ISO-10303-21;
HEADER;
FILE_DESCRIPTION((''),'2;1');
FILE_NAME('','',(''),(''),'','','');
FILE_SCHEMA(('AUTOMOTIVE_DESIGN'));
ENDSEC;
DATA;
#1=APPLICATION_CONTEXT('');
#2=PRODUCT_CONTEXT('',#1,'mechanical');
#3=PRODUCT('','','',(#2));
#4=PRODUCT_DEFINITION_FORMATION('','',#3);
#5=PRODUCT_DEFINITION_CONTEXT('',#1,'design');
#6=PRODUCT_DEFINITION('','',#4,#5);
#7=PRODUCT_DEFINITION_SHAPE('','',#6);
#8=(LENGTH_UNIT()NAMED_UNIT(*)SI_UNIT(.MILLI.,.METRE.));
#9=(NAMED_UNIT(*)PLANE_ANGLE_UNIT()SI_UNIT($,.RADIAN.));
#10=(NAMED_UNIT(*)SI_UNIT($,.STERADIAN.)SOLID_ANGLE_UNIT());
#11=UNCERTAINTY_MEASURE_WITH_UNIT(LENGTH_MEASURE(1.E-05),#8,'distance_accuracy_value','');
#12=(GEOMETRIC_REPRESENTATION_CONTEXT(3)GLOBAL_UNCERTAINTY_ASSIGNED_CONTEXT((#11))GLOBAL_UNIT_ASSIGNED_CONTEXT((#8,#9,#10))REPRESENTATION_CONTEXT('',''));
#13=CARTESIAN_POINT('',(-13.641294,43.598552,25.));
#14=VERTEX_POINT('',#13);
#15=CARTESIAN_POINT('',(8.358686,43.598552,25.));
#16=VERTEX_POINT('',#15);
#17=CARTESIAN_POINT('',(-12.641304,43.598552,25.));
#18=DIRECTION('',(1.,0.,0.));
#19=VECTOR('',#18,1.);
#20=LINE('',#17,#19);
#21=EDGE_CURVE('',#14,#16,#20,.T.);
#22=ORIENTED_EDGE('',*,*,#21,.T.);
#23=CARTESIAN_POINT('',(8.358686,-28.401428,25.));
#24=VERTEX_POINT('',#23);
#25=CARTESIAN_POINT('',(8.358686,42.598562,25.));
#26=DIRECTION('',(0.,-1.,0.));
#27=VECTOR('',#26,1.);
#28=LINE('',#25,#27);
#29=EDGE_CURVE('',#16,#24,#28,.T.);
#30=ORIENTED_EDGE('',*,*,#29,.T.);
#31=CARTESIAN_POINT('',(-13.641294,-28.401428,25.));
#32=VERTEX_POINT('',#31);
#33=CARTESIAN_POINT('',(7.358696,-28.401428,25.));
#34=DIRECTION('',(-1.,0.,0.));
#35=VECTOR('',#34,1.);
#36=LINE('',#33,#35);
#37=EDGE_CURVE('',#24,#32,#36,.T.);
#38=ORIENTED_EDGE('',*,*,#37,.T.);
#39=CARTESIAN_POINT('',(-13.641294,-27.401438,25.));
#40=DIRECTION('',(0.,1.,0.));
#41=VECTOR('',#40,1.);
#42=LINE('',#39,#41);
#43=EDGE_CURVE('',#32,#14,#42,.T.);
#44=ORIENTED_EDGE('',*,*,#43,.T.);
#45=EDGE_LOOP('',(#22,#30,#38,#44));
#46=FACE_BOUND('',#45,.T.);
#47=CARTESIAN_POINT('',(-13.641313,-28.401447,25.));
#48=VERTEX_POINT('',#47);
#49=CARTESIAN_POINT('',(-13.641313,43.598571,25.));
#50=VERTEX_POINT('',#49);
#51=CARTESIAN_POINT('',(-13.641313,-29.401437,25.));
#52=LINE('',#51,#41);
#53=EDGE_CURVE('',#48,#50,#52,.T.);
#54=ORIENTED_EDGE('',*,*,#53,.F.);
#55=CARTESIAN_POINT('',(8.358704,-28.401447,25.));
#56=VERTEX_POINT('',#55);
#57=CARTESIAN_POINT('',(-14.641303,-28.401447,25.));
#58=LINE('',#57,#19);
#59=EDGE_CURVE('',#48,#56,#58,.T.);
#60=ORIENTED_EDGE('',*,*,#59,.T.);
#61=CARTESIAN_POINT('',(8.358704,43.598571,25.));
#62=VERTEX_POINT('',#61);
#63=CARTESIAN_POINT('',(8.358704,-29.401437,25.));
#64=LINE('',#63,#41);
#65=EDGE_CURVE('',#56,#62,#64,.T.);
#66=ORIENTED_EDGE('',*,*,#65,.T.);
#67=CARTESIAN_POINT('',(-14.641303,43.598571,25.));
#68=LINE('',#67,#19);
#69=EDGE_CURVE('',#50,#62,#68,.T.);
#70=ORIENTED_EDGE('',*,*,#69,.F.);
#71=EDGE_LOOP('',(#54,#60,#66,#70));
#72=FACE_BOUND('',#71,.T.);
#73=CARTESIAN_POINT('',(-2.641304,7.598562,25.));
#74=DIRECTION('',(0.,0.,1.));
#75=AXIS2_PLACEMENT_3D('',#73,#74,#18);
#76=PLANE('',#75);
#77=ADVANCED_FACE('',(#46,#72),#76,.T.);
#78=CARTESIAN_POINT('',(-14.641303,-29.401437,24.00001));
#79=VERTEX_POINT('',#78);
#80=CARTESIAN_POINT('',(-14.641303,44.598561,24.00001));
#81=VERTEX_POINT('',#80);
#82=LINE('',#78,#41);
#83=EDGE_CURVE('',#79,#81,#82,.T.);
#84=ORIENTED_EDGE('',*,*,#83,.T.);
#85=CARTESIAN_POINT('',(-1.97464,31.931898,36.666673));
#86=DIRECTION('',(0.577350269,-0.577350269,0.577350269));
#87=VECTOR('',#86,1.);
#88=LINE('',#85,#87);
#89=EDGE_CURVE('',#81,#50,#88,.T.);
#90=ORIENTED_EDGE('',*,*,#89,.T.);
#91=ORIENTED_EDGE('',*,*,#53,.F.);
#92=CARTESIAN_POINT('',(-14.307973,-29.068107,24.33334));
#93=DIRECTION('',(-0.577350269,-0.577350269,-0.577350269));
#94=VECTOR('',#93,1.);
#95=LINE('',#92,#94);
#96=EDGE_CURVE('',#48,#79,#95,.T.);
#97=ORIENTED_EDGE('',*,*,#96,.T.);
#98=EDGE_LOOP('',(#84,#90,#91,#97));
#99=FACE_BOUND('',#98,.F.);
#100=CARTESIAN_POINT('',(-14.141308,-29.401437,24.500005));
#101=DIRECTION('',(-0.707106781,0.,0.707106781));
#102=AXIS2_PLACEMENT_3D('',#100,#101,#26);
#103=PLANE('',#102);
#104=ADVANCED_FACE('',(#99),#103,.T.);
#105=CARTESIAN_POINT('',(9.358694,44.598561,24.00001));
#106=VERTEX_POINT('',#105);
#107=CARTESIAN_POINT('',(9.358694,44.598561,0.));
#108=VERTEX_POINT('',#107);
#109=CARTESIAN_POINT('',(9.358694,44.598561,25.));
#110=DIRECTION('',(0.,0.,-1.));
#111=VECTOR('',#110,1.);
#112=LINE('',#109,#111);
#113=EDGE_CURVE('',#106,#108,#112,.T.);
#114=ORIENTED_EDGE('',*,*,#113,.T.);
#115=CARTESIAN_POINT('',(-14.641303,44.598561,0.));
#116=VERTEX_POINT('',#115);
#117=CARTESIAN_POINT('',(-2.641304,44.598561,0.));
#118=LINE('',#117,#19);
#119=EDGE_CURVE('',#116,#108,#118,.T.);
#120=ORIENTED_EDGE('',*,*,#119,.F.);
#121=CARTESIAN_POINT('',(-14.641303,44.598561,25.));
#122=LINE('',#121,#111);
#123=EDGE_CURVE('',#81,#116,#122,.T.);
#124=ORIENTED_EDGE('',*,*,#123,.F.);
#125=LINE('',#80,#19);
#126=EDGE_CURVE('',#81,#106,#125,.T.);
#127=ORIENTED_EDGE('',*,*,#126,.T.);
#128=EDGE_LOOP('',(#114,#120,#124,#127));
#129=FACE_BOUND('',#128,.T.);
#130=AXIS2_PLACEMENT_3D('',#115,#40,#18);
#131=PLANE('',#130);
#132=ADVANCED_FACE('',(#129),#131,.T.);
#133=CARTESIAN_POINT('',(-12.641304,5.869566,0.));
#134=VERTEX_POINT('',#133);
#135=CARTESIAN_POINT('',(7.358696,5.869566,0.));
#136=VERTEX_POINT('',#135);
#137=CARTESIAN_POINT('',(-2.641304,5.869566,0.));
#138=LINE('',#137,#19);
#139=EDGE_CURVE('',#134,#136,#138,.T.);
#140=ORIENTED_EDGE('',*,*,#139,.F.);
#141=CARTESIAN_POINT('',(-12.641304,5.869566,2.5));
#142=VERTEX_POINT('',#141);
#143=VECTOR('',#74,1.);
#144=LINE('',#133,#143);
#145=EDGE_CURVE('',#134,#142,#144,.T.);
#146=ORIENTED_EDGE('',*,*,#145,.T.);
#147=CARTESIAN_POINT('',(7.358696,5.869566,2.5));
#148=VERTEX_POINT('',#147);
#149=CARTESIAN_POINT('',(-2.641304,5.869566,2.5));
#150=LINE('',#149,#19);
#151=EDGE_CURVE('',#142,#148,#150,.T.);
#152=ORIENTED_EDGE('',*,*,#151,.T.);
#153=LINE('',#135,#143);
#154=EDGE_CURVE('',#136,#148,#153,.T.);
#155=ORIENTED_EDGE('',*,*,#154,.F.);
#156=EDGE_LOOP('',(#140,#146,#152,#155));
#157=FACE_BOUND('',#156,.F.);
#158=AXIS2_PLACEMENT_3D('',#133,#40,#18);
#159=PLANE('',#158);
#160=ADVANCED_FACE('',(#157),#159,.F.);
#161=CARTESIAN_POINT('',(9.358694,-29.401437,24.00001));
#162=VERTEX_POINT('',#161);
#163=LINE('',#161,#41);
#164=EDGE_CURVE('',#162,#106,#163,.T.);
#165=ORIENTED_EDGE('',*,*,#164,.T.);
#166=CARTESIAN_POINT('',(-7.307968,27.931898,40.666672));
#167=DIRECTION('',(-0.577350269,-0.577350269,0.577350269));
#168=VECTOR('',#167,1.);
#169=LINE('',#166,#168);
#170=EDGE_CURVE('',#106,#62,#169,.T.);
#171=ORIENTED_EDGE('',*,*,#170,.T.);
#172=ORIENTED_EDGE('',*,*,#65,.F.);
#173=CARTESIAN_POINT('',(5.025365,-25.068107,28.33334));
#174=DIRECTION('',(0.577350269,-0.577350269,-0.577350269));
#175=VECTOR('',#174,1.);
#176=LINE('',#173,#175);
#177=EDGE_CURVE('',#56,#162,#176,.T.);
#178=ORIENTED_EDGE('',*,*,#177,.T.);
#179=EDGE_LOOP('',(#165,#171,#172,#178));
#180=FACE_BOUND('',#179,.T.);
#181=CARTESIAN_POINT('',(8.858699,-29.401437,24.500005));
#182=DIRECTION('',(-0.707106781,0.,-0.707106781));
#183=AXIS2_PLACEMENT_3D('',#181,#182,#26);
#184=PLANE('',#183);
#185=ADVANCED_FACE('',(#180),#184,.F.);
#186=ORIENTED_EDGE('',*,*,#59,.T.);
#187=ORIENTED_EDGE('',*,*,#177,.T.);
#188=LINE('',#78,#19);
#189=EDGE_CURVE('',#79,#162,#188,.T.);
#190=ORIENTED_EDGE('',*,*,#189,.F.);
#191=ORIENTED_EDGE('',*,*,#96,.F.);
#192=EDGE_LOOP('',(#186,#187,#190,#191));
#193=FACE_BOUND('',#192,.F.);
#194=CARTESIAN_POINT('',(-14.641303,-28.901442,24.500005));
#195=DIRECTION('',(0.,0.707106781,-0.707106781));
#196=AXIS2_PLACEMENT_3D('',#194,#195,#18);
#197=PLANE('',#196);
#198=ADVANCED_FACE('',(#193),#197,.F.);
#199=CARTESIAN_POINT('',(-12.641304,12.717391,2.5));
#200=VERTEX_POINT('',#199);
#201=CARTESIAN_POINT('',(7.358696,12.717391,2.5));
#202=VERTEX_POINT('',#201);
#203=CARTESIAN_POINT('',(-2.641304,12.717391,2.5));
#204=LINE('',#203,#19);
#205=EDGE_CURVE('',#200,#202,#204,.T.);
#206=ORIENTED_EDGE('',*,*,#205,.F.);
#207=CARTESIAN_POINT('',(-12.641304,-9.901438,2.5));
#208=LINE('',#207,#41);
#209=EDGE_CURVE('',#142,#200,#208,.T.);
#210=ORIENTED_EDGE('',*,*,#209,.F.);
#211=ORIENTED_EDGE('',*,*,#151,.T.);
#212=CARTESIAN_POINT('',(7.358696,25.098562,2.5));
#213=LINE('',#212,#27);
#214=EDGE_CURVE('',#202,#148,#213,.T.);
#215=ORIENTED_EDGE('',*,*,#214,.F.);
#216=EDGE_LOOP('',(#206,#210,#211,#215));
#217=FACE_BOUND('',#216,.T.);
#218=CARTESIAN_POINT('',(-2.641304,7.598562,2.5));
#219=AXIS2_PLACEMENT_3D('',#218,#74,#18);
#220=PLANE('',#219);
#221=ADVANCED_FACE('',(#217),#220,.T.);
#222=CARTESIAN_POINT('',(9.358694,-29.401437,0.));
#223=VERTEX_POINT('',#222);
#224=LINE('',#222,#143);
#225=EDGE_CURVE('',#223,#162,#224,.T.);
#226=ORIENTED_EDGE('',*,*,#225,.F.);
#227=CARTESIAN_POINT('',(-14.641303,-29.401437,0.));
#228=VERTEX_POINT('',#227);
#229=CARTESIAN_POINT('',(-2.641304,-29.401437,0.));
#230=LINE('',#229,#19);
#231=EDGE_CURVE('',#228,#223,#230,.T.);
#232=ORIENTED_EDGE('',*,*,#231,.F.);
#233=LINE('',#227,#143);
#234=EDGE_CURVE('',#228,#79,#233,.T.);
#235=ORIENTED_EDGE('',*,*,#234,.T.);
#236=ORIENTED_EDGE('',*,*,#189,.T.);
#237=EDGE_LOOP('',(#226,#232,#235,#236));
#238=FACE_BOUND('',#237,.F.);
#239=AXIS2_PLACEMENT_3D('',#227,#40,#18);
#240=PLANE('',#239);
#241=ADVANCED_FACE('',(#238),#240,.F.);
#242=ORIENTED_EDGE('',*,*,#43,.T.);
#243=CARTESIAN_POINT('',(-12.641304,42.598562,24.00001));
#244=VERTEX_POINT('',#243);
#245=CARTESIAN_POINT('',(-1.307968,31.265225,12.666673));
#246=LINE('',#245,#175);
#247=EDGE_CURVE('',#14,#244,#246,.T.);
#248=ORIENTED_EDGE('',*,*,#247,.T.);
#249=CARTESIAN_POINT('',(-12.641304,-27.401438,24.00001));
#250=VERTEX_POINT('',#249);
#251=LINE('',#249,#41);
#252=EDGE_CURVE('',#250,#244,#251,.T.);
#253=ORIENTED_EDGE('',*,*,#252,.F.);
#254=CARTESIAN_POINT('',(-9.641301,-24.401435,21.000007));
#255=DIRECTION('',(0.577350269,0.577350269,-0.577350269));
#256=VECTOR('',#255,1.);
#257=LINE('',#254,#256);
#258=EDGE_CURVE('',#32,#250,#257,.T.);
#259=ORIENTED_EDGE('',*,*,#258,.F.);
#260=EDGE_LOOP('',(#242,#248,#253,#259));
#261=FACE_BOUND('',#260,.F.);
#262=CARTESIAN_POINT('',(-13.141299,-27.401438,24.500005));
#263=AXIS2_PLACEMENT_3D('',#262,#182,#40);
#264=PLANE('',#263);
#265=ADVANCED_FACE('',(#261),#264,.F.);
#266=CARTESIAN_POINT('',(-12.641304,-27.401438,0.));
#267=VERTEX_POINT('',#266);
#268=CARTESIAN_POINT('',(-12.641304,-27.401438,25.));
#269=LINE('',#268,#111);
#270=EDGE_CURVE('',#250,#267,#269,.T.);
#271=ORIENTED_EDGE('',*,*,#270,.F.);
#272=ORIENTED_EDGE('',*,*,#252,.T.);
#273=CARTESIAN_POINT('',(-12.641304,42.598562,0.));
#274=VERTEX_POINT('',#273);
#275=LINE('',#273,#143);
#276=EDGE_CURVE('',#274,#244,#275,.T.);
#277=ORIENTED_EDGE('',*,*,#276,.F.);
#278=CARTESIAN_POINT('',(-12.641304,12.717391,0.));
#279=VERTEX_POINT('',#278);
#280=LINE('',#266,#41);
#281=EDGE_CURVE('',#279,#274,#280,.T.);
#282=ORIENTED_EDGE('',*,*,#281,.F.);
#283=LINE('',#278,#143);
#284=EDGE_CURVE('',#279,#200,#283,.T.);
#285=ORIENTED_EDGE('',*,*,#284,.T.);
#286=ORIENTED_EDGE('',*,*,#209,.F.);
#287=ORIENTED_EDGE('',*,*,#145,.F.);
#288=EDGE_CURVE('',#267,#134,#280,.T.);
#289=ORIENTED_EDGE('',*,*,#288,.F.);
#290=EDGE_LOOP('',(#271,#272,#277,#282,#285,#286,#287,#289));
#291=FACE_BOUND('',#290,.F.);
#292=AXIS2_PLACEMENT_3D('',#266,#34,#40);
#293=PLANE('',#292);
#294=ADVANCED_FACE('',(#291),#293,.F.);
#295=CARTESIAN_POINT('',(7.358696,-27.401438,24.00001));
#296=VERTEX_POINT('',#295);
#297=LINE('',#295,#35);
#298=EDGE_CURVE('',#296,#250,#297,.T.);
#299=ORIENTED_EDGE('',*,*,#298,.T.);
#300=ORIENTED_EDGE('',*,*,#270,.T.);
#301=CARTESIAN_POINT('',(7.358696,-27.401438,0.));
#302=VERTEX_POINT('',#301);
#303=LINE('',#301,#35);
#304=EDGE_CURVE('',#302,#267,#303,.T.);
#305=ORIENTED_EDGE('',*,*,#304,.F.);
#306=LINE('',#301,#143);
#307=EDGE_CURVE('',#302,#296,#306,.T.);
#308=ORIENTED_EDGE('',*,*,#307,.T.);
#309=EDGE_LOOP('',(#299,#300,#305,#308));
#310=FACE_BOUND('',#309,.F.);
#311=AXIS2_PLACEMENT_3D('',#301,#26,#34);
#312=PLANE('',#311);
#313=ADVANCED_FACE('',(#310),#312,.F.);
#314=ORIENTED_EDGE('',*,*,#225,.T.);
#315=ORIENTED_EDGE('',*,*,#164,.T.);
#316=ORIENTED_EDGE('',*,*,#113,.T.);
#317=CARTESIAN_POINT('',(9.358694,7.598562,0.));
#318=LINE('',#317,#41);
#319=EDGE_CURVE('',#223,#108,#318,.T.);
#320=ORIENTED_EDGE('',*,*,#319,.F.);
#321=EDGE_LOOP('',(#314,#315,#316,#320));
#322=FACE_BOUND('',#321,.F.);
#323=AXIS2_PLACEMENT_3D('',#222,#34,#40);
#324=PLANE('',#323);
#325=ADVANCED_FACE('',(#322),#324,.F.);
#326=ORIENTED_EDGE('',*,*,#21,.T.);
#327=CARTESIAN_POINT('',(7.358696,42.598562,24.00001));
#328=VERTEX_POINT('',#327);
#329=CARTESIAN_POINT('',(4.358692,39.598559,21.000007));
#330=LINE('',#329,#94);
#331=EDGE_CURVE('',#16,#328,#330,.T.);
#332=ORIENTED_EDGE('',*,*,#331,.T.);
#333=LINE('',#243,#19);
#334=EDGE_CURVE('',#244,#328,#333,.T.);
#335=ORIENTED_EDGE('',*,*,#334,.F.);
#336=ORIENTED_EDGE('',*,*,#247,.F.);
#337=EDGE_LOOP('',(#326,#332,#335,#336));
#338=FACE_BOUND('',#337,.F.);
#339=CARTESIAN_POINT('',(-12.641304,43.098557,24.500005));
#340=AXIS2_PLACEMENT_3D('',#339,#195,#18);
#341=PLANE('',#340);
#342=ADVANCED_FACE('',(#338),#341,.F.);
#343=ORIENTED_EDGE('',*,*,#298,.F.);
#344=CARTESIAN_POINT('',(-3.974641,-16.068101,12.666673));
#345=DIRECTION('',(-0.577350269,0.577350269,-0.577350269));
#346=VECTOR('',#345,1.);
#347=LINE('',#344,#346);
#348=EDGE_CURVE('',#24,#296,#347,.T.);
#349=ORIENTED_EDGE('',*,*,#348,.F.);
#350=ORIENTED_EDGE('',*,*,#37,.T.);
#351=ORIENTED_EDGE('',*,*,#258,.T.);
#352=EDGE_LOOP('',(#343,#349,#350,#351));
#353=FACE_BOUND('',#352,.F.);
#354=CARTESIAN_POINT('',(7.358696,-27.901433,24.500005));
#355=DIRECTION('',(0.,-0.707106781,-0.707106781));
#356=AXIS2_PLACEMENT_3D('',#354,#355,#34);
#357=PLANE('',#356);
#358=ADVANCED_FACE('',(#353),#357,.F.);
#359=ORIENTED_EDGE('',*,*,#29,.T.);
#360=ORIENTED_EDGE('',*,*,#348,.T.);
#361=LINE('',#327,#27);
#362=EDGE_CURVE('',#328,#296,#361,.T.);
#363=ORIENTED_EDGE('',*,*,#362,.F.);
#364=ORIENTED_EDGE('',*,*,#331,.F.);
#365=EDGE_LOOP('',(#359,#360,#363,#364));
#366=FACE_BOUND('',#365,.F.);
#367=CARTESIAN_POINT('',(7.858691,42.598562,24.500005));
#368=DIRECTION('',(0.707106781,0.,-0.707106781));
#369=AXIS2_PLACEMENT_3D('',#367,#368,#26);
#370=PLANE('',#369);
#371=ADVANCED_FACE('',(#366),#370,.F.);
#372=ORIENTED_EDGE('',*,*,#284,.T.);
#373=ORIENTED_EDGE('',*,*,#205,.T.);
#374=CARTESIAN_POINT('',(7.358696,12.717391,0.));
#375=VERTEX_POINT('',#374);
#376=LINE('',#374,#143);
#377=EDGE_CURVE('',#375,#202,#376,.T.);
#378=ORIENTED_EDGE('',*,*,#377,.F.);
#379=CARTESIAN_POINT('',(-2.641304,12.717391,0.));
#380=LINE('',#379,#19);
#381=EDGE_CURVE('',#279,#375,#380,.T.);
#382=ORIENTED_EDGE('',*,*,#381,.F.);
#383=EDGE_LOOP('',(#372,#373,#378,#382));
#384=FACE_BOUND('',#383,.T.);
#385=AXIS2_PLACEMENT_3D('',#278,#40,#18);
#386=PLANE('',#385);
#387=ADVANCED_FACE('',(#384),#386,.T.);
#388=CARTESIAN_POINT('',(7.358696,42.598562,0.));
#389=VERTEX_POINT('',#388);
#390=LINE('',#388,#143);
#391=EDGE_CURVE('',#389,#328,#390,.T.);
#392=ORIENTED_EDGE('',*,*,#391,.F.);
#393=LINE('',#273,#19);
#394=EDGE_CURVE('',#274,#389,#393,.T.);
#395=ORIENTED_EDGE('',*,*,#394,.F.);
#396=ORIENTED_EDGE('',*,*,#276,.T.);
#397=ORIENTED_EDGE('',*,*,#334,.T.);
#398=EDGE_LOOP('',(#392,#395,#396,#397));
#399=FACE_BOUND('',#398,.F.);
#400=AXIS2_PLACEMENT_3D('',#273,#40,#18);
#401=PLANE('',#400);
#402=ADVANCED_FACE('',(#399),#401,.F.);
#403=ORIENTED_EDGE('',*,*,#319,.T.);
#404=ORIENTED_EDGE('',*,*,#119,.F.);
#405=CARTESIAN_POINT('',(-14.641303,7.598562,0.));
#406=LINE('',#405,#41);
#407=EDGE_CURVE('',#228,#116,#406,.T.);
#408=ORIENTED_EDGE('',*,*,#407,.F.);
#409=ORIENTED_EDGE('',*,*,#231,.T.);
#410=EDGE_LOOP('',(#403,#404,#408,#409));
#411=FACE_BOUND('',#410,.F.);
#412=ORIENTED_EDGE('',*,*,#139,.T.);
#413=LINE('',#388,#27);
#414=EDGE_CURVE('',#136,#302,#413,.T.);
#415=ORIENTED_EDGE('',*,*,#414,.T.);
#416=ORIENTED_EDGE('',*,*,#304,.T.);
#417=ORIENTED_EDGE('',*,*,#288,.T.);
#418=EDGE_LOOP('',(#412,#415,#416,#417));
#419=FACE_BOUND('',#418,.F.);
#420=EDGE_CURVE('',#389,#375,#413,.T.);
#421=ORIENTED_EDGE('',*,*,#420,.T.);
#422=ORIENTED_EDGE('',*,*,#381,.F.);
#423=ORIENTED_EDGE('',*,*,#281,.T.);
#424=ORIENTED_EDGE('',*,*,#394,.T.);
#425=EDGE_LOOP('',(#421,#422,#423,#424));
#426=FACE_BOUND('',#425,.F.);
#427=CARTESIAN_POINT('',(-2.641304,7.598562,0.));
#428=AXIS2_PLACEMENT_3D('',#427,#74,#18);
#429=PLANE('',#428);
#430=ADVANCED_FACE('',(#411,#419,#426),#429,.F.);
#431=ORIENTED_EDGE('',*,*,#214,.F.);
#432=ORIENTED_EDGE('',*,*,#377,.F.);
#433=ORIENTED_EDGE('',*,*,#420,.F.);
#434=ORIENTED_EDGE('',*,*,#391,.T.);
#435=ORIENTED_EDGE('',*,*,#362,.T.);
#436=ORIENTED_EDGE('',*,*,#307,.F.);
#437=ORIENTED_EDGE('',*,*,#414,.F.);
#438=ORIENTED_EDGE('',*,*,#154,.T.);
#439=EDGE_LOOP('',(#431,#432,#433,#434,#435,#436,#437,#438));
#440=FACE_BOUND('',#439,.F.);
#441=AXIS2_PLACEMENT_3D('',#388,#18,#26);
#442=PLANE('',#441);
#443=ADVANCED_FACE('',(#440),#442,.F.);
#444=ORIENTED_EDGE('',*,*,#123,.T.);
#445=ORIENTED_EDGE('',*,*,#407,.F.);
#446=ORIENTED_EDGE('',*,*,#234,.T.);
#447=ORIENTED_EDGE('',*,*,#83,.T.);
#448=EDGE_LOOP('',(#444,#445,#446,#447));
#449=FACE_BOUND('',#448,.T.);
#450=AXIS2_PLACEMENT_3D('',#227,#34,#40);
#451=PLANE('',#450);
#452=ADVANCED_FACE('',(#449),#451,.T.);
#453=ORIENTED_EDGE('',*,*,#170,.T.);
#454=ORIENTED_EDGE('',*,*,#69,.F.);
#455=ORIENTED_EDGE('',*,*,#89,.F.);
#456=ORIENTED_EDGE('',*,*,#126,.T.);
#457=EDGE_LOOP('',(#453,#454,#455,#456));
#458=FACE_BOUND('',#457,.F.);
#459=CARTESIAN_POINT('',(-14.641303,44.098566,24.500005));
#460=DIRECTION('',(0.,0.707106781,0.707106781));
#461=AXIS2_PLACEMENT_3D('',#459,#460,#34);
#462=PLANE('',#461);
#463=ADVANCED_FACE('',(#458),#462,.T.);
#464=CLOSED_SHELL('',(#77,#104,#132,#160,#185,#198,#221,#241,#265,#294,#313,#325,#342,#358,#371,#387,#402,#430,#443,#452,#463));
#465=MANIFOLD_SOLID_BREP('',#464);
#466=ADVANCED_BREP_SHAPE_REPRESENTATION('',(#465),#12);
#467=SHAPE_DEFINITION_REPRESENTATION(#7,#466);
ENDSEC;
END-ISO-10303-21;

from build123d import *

# Parameters (mm, degrees)
F0_W     = 23.9999974624
F0_H     = 73.9999974624
F1_DEPTH = 25
F0_W_2   = 20
F0_H_2   = 6.8478258327
F2_DEPTH = 2.5
F3_SIZE  = 0.99999


# Not quite as in the source:
# - a fillet or chamfer is up to 0.001 mm smaller than in the source, because OpenCascade refuses the exact size


with BuildPart() as f1:
    # F0 (on Top) → F1 (new body)
    with BuildSketch(Plane.XY):
        with Locations((-2.6413043961, 7.5985620491)):
            Rectangle(F0_W, F0_H)
        Polygon((-12.6413043961, 12.7173913643), (-12.6413043961, 42.5985620491), (7.3586956039, 42.5985620491), (7.3586956039, 12.7173913643), (7.3586956039, 5.8695655316), (7.3586956039, -27.4014379509), (-12.6413043961, -27.4014379509), (-12.6413043961, 5.8695655316), align=None, mode=Mode.SUBTRACT)
    extrude(amount=F1_DEPTH)

    # F0 (on Top) → F2 (join)
    with BuildSketch(Plane.XY):
        with Locations((-2.6413043961, 7.5985620491)):
            Rectangle(F0_W, F0_H)
        Polygon((-12.6413043961, 12.7173913643), (-12.6413043961, 42.5985620491), (7.3586956039, 42.5985620491), (7.3586956039, 12.7173913643), (7.3586956039, 5.8695655316), (7.3586956039, -27.4014379509), (-12.6413043961, -27.4014379509), (-12.6413043961, 5.8695655316), align=None, mode=Mode.SUBTRACT)
        with Locations((-2.6413043961, 9.2934784479)):
            Rectangle(F0_W_2, F0_H_2)
    extrude(amount=F2_DEPTH)

    # F3 (size 1 in the source; OpenCascade refuses exactly that, so slightly less here)
    f3_edges = [f1.edges().sort_by_distance(p)[0] for p in [
        (-2.641304, -29.401437, 25),
        (-14.641303, 7.598562, 25),
        (9.358694, 7.598562, 25),
        (-2.641304, 44.598561, 25),
        (-2.641304, 42.598562, 25),
        (7.358696, 7.598562, 25),
        (-12.641304, 7.598562, 25),
        (-2.641304, -27.401438, 25),
    ]]
    chamfer(f3_edges, length=F3_SIZE)


solid = f1.part
